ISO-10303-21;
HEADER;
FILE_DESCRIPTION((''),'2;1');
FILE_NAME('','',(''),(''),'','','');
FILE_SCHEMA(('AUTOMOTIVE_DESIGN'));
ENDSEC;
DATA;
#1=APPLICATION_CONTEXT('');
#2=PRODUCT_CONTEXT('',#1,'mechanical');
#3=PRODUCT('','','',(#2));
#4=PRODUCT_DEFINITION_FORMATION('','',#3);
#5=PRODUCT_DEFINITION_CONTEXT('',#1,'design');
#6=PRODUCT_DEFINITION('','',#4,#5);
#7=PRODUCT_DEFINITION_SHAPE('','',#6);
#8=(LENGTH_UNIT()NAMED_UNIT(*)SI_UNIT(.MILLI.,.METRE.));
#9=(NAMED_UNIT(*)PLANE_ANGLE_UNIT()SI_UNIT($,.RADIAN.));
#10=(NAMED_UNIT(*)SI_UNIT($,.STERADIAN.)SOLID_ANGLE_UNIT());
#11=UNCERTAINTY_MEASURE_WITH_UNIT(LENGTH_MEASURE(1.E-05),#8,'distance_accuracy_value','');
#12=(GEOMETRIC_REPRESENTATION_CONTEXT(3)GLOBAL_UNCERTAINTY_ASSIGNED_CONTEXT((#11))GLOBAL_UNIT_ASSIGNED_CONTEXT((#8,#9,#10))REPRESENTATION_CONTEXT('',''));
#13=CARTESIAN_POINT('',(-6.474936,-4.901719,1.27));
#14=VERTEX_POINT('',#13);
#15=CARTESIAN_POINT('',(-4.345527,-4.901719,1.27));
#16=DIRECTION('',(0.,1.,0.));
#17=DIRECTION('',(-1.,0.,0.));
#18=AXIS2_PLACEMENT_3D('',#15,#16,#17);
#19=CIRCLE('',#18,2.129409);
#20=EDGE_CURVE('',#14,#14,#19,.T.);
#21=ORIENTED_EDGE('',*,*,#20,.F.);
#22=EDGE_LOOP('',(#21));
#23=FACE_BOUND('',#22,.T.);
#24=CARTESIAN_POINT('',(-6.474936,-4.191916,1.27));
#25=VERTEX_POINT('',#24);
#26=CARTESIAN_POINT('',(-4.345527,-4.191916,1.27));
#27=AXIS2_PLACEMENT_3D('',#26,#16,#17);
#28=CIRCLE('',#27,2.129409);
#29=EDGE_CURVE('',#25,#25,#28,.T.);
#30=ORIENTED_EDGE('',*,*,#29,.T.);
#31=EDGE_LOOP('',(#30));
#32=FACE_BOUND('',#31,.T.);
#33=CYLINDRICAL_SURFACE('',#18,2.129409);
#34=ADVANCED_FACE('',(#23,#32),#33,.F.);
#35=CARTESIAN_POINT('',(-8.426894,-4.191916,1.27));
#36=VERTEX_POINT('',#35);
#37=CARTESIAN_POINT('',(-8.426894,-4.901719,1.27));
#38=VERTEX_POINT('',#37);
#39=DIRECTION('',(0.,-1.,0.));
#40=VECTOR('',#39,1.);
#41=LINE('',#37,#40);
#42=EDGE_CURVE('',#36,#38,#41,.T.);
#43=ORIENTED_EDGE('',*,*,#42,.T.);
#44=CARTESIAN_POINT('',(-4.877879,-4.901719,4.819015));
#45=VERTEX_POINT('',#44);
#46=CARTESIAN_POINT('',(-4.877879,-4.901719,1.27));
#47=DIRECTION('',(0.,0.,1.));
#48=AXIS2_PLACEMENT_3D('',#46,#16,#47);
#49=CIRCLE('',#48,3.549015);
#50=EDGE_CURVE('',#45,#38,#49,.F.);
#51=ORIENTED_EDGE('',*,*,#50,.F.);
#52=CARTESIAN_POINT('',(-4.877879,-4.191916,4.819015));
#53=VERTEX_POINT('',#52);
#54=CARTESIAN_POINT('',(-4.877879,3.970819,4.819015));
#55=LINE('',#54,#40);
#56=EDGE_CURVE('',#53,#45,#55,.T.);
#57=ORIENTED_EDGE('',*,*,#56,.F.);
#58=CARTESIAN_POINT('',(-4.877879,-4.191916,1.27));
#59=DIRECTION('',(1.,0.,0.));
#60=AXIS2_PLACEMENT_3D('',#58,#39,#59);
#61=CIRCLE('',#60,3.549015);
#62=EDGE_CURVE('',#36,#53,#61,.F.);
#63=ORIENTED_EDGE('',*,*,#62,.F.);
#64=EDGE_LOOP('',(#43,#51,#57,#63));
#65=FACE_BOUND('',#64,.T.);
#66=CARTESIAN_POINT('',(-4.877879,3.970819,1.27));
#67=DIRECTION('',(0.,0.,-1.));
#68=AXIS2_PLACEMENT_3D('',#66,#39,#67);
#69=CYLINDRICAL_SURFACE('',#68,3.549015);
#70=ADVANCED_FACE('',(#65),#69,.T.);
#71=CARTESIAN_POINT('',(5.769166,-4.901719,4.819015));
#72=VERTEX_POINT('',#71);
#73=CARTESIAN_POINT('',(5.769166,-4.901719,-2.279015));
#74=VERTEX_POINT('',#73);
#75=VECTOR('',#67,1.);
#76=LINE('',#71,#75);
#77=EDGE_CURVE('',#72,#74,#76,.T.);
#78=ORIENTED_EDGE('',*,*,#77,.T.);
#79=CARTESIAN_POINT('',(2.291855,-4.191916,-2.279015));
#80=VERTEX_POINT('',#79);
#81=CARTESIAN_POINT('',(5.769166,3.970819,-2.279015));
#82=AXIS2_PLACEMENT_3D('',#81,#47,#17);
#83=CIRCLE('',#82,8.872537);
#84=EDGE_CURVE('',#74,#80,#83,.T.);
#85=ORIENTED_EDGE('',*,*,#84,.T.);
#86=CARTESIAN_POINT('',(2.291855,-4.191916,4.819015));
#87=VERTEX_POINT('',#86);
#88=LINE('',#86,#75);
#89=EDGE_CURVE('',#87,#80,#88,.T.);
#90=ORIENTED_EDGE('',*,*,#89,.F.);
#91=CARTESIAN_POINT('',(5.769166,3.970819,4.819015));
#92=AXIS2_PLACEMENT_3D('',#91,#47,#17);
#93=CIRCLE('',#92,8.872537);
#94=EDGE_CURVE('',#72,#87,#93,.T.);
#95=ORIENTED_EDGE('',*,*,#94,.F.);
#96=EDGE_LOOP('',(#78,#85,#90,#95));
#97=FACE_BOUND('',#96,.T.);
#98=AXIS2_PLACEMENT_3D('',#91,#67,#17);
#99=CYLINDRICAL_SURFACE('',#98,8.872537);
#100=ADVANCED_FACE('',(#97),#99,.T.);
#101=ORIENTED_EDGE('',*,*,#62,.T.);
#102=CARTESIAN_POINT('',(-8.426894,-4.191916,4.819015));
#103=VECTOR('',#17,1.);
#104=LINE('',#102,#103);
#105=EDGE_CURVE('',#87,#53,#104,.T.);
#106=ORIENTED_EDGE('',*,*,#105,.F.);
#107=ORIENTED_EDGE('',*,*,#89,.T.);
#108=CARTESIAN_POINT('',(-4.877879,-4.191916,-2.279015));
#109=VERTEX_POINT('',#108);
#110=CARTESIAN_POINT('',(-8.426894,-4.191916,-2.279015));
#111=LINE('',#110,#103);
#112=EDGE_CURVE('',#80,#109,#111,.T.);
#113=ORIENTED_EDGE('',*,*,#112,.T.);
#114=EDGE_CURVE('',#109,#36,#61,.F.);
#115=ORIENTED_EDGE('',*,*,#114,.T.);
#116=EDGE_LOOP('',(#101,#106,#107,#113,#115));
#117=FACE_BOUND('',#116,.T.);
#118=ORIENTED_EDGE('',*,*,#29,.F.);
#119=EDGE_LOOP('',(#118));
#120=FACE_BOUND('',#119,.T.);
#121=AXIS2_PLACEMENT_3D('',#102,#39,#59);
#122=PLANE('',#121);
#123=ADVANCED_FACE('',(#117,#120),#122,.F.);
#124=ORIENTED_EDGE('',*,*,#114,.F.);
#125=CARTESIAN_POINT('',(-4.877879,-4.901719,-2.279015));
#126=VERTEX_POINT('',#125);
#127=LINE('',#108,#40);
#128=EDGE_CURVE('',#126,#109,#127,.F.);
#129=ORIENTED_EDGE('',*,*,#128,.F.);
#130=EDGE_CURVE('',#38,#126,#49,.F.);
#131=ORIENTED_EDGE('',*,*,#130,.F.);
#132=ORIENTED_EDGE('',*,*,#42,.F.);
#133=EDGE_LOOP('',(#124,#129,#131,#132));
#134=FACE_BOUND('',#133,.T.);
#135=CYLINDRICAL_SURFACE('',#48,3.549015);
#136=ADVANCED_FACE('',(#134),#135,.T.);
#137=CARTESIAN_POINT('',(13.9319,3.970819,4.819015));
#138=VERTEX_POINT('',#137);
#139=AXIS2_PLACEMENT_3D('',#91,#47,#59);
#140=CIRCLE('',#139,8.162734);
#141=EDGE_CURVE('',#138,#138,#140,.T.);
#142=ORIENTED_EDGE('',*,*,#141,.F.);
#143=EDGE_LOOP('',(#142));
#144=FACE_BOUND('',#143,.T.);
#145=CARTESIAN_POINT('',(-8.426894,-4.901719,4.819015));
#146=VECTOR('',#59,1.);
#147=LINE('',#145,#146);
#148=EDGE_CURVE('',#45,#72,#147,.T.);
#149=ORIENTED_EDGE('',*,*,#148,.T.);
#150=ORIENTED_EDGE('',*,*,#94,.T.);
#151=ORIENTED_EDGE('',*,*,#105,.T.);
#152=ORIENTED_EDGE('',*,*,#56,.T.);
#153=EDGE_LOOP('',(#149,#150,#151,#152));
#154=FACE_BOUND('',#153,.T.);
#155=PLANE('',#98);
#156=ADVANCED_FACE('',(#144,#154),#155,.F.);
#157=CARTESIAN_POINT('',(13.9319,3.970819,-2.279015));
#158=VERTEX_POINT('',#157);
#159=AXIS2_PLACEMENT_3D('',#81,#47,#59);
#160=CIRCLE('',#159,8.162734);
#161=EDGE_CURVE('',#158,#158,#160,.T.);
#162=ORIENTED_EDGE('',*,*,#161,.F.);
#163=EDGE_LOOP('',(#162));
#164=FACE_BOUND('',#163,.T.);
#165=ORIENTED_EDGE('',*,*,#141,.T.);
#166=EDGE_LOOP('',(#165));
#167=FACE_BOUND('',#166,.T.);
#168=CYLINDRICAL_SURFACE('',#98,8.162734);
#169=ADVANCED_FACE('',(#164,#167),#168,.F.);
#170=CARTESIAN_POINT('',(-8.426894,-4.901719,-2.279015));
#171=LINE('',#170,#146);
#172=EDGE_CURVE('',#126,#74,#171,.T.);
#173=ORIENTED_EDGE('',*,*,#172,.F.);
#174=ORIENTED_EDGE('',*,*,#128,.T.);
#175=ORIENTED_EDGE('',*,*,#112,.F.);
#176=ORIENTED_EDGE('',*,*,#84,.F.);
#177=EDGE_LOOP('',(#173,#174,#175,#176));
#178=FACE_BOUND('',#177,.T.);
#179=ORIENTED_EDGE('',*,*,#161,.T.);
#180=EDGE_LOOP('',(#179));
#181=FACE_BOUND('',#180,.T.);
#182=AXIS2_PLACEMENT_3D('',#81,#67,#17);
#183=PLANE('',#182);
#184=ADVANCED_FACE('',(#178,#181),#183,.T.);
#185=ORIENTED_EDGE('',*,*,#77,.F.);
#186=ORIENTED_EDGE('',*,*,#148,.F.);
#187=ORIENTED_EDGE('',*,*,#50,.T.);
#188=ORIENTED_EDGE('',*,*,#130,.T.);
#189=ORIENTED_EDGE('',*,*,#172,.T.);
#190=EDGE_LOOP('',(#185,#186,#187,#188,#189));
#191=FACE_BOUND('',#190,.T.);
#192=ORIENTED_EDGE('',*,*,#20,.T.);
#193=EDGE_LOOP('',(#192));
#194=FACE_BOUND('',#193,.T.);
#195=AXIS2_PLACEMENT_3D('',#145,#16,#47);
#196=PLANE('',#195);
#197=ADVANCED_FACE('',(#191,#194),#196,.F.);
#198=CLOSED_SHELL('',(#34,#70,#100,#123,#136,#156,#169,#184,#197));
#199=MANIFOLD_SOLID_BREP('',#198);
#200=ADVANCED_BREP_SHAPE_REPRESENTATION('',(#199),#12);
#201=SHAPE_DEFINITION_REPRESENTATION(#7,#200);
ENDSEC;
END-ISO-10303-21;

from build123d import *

# Parameters (mm, degrees)
SKETCH1_R           = 2.921
BOSS_EXTRUDE1_DEPTH = 2.54
SKETCH3_R           = 0.762
CUT_EXTRUDE1_DEPTH  = 0.254
FILLET1_R           = 1.27
SCALE1_SCALE        = 2.43
SCALE3_SCALE        = 1.15


with BuildPart() as part:
    # Sketch1 → Boss-Extrude1 (new body)
    with BuildSketch(Plane.XY):
        with BuildLine():
            Line((0, 0), (5.08, 0))
            ThreePointArc((5.08, 0), (5.715, 6.285851973), (3.835659211, 0.254))
            Line((3.835659211, 0.254), (0, 0.254))
            Line((0, 0.254), (0, 0))
        make_face()
        with Locations((5.08, 3.175)):
            Circle(SKETCH1_R, mode=Mode.SUBTRACT)
    extrude(amount=BOSS_EXTRUDE1_DEPTH)

    # Sketch3 → Cut-Extrude1 (cut)
    with BuildSketch(Plane(origin=(0, 0.254, 0), x_dir=(1, 0, 0), z_dir=(0, 1, 0))):
        with Locations(Location((1.4605, -1.27, 0), (0, 0, 180))):
            Circle(SKETCH3_R)
    extrude(amount=-CUT_EXTRUDE1_DEPTH, mode=Mode.SUBTRACT)

    # Fillet1
    fillet1_edges = [part.edges().sort_by_distance(p)[0] for p in [
        (0, 0.127, 2.54),
        (0, 0.127, 0),
    ]]
    fillet(fillet1_edges, radius=FILLET1_R - 0.0001)  # a hair under: the kernel refuses the full size


with BuildPart() as part_1:
    # Scale1: scaled about (4.695948506, 2.731518553, 1.27)
    add(part.part.scale(SCALE1_SCALE).moved(Location((-6.715206364, -3.906071531, -1.8161))))


with BuildPart() as part_2:
    # Scale3: scaled about (4.695948505, 2.731518554, 1.27)
    add(part_1.part.scale(SCALE3_SCALE).moved(Location((-0.704392276, -0.409727783, -0.1905))))


solid = part_2.part
